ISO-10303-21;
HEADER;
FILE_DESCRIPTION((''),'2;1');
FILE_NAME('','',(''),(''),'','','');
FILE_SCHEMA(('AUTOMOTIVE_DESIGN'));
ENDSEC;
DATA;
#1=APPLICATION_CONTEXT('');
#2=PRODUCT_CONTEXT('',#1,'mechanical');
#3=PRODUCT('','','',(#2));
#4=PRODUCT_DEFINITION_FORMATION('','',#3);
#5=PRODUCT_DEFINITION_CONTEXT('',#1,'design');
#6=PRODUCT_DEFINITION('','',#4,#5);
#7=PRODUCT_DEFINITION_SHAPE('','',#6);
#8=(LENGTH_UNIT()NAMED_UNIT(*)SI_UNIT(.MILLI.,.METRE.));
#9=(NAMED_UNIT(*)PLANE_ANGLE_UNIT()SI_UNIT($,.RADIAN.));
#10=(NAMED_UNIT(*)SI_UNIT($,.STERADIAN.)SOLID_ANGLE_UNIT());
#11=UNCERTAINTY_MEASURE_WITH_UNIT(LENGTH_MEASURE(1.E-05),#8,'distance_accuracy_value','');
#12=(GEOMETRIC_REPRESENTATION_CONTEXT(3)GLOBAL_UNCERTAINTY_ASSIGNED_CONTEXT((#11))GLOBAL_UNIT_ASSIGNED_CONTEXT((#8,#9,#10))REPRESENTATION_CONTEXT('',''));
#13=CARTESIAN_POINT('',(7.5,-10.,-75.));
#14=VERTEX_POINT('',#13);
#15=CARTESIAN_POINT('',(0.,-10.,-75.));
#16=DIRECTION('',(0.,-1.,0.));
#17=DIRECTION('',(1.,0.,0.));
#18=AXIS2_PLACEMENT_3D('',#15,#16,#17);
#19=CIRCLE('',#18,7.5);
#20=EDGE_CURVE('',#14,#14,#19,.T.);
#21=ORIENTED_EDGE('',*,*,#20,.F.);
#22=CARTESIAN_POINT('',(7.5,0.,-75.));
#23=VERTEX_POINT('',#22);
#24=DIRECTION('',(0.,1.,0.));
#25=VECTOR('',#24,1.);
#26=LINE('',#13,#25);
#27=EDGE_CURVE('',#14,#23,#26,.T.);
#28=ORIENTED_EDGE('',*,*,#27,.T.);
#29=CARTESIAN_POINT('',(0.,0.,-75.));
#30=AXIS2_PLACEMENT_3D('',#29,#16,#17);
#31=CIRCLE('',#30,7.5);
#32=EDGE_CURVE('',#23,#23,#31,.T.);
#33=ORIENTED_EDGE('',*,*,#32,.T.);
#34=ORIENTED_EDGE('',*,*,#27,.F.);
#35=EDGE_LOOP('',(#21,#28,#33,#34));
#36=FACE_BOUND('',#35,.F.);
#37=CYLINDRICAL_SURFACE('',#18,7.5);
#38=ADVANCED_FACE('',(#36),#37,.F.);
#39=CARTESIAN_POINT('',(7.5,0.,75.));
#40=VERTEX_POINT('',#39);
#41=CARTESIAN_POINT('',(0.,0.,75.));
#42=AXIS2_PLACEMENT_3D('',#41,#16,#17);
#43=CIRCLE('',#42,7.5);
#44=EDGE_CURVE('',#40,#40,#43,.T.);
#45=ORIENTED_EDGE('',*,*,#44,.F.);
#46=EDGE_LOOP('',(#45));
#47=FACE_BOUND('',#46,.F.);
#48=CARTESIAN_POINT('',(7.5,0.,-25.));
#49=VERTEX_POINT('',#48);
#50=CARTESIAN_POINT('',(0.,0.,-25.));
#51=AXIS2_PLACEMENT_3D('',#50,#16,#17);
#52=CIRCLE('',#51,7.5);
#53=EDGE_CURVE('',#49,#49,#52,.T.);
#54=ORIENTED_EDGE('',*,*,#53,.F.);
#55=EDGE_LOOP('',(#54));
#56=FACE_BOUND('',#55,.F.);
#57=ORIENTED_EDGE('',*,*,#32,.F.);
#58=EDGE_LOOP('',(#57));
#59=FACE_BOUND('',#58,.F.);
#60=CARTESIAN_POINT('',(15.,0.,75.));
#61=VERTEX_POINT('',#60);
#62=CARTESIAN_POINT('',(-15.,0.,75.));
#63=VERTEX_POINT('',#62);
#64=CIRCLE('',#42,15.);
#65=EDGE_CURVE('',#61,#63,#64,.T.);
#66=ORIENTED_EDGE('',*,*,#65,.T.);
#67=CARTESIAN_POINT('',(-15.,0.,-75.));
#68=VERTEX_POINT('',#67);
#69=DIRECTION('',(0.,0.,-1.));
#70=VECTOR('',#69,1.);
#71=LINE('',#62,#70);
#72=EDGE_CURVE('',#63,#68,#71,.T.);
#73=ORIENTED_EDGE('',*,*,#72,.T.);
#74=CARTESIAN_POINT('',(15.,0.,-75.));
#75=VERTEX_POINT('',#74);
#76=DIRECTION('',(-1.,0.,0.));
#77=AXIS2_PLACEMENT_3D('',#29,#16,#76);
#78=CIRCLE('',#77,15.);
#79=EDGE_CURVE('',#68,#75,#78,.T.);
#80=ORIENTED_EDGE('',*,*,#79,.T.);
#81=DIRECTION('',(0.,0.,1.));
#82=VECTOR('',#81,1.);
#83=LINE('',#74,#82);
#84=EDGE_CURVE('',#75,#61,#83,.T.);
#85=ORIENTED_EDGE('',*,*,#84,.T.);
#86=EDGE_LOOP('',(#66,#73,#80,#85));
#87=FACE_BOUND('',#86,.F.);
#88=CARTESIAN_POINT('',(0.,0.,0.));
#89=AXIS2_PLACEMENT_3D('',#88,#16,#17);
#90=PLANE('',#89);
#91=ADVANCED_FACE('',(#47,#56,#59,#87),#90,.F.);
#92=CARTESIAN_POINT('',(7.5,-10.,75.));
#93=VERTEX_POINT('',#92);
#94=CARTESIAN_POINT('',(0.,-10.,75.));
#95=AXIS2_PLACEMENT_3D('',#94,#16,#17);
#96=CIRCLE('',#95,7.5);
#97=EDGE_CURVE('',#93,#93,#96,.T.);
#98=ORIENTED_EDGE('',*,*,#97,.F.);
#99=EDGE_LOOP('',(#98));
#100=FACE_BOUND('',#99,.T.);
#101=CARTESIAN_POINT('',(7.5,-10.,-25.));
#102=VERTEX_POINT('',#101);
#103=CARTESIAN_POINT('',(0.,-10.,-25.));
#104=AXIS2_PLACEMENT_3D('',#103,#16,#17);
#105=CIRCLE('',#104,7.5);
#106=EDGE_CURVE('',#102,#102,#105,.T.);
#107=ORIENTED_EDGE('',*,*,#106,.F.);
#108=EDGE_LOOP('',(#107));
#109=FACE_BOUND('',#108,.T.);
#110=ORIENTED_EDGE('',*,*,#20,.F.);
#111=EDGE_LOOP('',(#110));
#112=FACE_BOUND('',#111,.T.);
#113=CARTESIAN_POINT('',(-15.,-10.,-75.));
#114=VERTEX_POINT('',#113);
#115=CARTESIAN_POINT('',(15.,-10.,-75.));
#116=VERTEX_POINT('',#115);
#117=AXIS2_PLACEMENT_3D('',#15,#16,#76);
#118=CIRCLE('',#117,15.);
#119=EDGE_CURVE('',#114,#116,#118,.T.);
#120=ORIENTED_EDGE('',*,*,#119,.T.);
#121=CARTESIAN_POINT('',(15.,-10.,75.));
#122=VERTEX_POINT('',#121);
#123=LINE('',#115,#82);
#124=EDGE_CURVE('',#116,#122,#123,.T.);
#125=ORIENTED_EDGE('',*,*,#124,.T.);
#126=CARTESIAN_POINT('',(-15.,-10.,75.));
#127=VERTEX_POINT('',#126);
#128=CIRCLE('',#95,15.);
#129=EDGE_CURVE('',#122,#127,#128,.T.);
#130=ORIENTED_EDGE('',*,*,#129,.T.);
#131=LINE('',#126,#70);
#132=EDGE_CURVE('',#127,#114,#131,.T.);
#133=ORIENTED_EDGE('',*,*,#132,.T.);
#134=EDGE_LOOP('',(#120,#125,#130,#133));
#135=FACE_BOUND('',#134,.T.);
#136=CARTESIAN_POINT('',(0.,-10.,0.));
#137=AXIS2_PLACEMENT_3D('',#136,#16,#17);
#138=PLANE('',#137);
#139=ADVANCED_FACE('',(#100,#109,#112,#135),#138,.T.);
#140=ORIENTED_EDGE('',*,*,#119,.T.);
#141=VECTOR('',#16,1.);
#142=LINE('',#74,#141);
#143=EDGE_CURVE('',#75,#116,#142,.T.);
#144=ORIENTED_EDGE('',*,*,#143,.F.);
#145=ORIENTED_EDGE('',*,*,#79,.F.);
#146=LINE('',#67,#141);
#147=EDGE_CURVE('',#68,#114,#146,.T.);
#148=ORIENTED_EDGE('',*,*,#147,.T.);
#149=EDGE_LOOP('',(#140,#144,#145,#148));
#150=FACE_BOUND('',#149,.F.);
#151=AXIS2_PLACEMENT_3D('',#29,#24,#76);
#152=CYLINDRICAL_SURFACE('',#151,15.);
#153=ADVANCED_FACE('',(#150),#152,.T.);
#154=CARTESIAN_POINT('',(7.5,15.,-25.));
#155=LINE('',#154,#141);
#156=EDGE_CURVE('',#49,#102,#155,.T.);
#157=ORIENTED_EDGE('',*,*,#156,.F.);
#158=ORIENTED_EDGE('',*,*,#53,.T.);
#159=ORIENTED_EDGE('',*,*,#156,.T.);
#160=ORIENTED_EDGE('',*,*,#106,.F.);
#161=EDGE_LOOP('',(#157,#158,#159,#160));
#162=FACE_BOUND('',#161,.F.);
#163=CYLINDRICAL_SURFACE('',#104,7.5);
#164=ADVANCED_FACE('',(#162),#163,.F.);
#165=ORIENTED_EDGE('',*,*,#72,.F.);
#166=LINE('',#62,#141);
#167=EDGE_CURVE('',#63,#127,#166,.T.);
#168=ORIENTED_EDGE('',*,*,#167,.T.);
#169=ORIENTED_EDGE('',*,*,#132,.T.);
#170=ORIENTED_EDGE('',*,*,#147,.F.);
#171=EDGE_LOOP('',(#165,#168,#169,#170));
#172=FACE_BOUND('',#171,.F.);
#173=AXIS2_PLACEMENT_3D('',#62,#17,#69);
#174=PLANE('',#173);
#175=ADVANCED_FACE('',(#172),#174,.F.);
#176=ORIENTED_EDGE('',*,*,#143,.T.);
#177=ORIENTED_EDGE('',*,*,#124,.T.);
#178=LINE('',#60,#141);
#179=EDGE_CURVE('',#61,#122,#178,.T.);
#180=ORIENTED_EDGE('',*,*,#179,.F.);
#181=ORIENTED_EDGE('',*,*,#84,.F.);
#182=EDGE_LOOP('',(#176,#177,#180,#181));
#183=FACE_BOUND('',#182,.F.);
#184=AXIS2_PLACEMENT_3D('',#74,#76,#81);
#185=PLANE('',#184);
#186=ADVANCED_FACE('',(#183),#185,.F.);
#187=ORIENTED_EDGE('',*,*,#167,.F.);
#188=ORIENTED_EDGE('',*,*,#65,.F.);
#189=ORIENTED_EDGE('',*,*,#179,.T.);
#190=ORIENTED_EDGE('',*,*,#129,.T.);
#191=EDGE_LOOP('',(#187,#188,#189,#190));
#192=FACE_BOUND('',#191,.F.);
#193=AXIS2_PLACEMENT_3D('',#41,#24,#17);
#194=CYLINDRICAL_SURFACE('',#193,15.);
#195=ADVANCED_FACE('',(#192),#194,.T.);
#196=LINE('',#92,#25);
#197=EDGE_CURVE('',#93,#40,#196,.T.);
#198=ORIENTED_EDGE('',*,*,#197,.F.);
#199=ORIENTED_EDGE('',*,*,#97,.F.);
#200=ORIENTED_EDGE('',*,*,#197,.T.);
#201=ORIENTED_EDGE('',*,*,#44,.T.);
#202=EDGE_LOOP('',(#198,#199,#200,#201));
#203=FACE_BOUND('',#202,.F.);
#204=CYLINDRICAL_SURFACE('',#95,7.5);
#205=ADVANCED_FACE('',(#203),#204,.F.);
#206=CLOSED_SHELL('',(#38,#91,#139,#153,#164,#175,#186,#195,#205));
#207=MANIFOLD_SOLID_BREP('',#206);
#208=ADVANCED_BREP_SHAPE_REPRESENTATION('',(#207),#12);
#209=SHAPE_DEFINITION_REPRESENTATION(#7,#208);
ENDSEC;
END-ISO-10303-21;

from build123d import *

# Parameters (mm, degrees)
F1_DEPTH = 10
F2_R     = 7.5
F3_DEPTH = 25


# Not quite as in the source:
# - a feature names something its author has since deleted; it is built from what else it names


with BuildPart() as f1:
    # F0 (on Front) → F1 (new body)
    with BuildSketch(Plane.XZ):
        with BuildLine():
            Line((15, -75), (15, 75))
            ThreePointArc((15, 75), (0, 90), (-15, 75))
            Line((-15, 75), (-15, -75))
            ThreePointArc((-15, -75), (0, -90), (15, -75))
        make_face()
    extrude(amount=F1_DEPTH)

    # F2 (on face) → F3 (cut, symmetric)
    with BuildSketch(Plane.XZ.offset(10)):
        with Locations((0, 75)):
            Circle(F2_R)
        with Locations((0, -75)):
            Circle(F2_R)
        with Locations((0, -25)):
            Circle(F2_R)
    extrude(amount=F3_DEPTH, both=True, mode=Mode.SUBTRACT)


solid = f1.part
